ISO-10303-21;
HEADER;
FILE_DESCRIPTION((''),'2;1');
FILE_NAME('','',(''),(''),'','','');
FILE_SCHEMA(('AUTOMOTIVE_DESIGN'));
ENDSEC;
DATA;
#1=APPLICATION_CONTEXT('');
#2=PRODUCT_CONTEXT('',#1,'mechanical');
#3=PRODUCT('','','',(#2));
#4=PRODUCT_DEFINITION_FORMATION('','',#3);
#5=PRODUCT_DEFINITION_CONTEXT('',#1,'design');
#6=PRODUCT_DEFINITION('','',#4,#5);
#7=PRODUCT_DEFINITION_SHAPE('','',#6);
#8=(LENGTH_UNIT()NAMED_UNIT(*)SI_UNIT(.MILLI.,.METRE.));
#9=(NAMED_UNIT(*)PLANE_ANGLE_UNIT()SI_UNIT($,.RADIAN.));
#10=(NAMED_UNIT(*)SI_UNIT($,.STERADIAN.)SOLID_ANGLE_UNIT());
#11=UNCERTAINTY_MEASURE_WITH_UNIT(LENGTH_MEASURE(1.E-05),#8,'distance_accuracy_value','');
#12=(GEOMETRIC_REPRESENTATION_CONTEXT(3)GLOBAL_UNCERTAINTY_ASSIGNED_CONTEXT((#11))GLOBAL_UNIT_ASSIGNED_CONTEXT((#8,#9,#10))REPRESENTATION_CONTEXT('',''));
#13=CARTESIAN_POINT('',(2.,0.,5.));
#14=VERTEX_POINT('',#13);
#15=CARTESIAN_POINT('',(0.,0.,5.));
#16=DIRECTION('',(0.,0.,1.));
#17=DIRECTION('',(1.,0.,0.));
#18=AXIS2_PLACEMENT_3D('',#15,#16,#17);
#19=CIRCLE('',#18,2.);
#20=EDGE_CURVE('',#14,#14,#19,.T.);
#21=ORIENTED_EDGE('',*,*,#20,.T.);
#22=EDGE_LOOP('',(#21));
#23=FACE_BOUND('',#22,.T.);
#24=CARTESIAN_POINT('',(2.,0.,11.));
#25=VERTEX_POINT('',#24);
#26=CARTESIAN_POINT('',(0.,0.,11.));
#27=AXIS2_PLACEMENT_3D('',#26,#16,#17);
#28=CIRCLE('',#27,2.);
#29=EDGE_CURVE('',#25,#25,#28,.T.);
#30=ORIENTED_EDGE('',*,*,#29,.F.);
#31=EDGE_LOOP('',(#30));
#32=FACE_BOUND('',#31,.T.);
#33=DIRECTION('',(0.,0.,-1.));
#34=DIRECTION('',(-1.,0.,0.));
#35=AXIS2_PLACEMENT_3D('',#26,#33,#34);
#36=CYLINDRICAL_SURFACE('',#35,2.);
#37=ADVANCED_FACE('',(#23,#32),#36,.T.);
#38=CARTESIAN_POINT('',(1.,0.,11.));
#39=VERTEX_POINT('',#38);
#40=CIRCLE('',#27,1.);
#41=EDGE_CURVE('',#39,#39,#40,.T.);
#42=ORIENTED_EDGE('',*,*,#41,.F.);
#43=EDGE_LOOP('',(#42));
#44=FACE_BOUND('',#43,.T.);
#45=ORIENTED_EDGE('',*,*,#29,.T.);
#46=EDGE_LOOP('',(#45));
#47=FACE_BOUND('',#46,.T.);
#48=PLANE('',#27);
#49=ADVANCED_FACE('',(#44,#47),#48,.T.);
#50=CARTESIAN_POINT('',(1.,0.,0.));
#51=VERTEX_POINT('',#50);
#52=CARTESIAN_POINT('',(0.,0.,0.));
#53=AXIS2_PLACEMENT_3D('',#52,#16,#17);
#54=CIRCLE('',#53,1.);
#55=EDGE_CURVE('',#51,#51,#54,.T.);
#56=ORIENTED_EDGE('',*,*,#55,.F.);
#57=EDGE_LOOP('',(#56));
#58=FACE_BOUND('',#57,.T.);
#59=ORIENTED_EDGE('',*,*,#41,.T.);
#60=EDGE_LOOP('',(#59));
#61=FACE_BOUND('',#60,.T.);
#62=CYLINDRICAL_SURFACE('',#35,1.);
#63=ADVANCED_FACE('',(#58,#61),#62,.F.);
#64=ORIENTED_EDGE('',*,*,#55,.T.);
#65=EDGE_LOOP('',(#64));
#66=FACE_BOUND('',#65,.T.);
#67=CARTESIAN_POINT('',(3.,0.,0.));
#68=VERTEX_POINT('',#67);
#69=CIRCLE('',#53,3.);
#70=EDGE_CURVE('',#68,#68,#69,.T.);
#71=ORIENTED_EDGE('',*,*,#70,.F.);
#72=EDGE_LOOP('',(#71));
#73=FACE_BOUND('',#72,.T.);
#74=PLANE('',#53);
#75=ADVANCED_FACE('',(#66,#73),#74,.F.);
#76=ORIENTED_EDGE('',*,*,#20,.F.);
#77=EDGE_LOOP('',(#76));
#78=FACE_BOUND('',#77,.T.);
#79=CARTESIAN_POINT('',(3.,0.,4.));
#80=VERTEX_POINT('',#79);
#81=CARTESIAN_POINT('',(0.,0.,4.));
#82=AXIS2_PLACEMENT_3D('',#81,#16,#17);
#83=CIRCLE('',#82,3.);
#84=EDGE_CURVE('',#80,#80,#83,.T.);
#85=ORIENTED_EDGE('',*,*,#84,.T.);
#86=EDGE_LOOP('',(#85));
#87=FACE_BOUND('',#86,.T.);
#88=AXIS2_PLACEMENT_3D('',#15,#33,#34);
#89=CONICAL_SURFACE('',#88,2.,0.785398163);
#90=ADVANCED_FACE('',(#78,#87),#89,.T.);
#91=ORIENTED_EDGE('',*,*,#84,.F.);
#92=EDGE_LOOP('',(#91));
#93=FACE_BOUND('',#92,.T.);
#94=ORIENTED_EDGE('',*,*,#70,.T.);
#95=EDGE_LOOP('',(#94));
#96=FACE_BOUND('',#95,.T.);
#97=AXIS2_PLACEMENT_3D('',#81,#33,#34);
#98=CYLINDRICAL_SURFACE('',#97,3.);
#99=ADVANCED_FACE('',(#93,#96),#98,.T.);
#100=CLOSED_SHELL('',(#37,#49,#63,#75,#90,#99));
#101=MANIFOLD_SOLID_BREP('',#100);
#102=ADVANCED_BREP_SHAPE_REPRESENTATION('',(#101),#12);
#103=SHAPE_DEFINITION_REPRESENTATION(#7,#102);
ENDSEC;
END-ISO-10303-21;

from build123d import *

# Parameters (mm, degrees)
BASE_SKETCH_R           = 3
BASE_SKETCH_R_2         = 2
EXTRUDE_PIN_THICK_DEPTH = 4
BASE_SKETCH_3_R         = 2
BASE_SKETCH_3_R_2       = 1
EXTRUDE_PIN_THIN_DEPTH  = 11
CHAMFER_2_SIZE          = 1


with BuildPart() as part:
    # Base Sketch → Extrude Pin Thick (new body)
    with BuildSketch(Plane.XY):
        Circle(BASE_SKETCH_R)
        Circle(BASE_SKETCH_R_2, mode=Mode.SUBTRACT)
    extrude(amount=EXTRUDE_PIN_THICK_DEPTH)

    # Base Sketch<3> → Extrude Pin Thin (add)
    with BuildSketch(Plane.XY):
        Circle(BASE_SKETCH_3_R)
        Circle(BASE_SKETCH_3_R_2, mode=Mode.SUBTRACT)
    extrude(amount=EXTRUDE_PIN_THIN_DEPTH)

    # Chamfer 2
    chamfer_2_edges = [part.edges().sort_by_distance(p)[0] for p in [
        (-2, 0, 4),
    ]]
    chamfer(chamfer_2_edges, length=CHAMFER_2_SIZE - 0.0001)  # a hair under: the kernel refuses the full size


solid = part.part
